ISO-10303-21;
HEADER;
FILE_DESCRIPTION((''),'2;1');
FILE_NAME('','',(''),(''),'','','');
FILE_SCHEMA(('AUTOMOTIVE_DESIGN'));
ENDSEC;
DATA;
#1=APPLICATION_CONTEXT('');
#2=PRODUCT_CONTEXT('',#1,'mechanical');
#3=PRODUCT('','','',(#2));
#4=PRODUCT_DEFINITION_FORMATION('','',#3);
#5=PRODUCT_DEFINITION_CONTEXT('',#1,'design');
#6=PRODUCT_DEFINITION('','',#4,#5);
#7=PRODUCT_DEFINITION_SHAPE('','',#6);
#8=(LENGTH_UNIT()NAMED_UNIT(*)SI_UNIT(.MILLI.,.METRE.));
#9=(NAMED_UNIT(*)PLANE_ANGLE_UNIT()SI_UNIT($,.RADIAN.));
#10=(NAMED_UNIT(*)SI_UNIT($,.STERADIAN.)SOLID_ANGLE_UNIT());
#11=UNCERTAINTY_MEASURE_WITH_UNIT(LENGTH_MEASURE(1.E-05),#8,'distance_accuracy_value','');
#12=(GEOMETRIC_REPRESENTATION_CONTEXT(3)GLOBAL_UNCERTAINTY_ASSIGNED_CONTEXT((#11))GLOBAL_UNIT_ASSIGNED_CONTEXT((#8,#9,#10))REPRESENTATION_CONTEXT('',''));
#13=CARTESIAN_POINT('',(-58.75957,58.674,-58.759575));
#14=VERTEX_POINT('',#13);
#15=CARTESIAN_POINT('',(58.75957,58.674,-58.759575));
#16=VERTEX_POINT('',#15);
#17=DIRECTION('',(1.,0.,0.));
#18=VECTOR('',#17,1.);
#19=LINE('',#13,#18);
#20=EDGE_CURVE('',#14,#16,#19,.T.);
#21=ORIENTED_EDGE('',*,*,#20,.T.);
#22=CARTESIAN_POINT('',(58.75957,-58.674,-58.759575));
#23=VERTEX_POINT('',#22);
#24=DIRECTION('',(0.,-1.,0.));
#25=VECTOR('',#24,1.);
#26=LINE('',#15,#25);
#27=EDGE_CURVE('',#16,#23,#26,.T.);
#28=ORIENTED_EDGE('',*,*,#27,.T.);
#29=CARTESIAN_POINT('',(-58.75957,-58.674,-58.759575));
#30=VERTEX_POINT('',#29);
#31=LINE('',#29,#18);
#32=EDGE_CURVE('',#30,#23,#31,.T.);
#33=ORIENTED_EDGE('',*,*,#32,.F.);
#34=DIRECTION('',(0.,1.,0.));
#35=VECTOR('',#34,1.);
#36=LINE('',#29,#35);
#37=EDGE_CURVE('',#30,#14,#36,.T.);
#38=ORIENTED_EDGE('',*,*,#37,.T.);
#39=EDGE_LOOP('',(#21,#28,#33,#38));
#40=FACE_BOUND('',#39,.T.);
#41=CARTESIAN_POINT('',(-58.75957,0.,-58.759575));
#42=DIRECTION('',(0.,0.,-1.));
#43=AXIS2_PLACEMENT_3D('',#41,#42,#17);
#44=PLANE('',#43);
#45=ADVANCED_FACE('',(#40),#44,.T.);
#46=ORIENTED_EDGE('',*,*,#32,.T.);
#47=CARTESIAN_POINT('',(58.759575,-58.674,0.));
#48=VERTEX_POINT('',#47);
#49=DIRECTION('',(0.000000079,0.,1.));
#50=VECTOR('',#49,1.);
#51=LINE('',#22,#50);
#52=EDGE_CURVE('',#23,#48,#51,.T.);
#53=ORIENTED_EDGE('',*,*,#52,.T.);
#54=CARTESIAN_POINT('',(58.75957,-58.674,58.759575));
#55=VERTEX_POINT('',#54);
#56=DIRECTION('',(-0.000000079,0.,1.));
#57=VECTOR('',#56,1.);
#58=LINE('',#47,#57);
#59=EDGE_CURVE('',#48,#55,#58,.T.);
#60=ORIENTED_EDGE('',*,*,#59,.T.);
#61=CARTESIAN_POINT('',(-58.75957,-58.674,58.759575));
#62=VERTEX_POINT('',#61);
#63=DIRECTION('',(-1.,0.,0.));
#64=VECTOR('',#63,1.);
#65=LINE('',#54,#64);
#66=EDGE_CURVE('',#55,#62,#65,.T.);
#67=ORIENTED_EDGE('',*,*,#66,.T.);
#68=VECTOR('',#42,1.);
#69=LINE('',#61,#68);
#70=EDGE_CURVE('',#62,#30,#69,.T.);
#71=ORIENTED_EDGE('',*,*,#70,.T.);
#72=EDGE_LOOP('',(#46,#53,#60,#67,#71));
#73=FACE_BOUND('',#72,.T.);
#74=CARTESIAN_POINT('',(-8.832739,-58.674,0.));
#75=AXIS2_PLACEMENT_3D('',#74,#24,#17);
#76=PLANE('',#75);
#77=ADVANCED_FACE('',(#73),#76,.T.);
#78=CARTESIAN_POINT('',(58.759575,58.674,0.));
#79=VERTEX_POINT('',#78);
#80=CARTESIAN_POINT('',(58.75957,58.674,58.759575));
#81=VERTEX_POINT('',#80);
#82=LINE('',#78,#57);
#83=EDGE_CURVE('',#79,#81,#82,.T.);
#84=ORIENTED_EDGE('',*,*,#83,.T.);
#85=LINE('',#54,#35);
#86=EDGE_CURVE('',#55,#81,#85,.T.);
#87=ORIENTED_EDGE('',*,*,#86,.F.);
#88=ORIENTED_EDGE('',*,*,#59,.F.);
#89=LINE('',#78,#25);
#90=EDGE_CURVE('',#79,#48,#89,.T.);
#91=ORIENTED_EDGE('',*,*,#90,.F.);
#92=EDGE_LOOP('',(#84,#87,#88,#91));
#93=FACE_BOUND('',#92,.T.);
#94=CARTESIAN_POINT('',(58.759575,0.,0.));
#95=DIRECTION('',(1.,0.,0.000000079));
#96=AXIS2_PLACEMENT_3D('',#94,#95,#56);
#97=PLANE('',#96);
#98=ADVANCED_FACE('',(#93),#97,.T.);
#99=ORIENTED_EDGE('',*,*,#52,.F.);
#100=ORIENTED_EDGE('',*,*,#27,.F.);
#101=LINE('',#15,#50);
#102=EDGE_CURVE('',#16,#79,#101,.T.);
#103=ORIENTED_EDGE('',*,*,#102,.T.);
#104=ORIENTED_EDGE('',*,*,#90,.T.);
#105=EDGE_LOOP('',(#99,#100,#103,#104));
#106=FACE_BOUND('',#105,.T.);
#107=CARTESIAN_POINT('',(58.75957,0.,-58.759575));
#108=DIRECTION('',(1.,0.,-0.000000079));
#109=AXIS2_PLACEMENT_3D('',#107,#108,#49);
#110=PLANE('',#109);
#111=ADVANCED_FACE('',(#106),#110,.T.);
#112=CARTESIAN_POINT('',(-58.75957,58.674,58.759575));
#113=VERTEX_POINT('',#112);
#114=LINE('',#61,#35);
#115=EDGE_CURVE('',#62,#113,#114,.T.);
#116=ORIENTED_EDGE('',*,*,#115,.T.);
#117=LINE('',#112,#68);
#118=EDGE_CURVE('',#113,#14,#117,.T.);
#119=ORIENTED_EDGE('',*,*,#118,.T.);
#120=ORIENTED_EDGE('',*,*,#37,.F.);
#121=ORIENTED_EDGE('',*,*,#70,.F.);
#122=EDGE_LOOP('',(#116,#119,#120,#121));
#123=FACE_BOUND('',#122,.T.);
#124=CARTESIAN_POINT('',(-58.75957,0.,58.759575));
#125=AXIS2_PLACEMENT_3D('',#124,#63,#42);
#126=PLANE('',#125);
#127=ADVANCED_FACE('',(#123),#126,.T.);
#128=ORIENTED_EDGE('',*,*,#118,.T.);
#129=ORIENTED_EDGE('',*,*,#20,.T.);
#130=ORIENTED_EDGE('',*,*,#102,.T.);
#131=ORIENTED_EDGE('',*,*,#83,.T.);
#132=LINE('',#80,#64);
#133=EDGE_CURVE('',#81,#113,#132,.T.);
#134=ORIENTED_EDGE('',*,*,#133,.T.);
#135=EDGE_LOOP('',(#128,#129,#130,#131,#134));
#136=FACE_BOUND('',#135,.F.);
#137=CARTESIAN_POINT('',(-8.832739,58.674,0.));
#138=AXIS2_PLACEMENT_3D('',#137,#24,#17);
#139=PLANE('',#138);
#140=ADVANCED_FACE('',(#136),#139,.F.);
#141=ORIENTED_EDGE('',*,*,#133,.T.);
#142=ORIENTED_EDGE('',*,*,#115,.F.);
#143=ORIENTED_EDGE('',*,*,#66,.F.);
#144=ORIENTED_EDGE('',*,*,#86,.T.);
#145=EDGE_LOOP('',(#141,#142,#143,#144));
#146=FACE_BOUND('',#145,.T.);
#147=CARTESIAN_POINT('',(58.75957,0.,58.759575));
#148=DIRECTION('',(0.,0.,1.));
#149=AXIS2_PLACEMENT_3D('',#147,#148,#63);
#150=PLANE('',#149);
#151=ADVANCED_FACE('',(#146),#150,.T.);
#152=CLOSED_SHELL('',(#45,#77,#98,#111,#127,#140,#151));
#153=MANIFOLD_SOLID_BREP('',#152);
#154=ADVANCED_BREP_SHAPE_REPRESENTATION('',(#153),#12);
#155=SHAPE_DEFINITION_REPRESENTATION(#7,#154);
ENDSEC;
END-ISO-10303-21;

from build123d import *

# Parameters (mm, degrees)
F2_DEPTH = 58.674


# Not quite as in the source:
# - ends of sketch curves that miss each other by under 0.0002 mm in the source are joined
# - the program builds the solid bodies; features that only make, move or delete a surface that nothing else refers to are left out


with BuildPart() as f2:
    # F0 (on Front) → F2 (new body, symmetric)
    with BuildSketch(Plane.XZ):
        with BuildLine():
            Line((-58.7595701218, -58.7595747784), (0, -58.7595747784))
            ThreePointArc((0, -58.7595747784), (41.5492937854, -41.5492937854), (58.7595747784, 0))
            ThreePointArc((58.7595747784, 0), (41.5492937854, 41.5492937854), (0, 58.7595747784))
            Line((0, 58.7595747784), (-58.7595701218, 58.7595747784))
            Line((-58.7595701218, 58.7595747784), (-58.7595701218, -58.7595747784))
        make_face()
        with BuildLine():
            ThreePointArc((0, 58.7595747784), (41.5492937854, 41.5492937854), (58.7595747784, 0))
            Line((58.7595747784, 0), (58.7595701218, 58.7595747784))
            Line((58.7595701218, 58.7595747784), (0, 58.7595747784))
        make_face()
        with BuildLine():
            ThreePointArc((58.7595747784, 0), (41.5492937854, -41.5492937854), (0, -58.7595747784))
            Line((0, -58.7595747784), (58.7595701218, -58.7595747784))
            Line((58.7595701218, -58.7595747784), (58.7595747784, 0))
        make_face()
    extrude(amount=F2_DEPTH, both=True)


solid = f2.part
